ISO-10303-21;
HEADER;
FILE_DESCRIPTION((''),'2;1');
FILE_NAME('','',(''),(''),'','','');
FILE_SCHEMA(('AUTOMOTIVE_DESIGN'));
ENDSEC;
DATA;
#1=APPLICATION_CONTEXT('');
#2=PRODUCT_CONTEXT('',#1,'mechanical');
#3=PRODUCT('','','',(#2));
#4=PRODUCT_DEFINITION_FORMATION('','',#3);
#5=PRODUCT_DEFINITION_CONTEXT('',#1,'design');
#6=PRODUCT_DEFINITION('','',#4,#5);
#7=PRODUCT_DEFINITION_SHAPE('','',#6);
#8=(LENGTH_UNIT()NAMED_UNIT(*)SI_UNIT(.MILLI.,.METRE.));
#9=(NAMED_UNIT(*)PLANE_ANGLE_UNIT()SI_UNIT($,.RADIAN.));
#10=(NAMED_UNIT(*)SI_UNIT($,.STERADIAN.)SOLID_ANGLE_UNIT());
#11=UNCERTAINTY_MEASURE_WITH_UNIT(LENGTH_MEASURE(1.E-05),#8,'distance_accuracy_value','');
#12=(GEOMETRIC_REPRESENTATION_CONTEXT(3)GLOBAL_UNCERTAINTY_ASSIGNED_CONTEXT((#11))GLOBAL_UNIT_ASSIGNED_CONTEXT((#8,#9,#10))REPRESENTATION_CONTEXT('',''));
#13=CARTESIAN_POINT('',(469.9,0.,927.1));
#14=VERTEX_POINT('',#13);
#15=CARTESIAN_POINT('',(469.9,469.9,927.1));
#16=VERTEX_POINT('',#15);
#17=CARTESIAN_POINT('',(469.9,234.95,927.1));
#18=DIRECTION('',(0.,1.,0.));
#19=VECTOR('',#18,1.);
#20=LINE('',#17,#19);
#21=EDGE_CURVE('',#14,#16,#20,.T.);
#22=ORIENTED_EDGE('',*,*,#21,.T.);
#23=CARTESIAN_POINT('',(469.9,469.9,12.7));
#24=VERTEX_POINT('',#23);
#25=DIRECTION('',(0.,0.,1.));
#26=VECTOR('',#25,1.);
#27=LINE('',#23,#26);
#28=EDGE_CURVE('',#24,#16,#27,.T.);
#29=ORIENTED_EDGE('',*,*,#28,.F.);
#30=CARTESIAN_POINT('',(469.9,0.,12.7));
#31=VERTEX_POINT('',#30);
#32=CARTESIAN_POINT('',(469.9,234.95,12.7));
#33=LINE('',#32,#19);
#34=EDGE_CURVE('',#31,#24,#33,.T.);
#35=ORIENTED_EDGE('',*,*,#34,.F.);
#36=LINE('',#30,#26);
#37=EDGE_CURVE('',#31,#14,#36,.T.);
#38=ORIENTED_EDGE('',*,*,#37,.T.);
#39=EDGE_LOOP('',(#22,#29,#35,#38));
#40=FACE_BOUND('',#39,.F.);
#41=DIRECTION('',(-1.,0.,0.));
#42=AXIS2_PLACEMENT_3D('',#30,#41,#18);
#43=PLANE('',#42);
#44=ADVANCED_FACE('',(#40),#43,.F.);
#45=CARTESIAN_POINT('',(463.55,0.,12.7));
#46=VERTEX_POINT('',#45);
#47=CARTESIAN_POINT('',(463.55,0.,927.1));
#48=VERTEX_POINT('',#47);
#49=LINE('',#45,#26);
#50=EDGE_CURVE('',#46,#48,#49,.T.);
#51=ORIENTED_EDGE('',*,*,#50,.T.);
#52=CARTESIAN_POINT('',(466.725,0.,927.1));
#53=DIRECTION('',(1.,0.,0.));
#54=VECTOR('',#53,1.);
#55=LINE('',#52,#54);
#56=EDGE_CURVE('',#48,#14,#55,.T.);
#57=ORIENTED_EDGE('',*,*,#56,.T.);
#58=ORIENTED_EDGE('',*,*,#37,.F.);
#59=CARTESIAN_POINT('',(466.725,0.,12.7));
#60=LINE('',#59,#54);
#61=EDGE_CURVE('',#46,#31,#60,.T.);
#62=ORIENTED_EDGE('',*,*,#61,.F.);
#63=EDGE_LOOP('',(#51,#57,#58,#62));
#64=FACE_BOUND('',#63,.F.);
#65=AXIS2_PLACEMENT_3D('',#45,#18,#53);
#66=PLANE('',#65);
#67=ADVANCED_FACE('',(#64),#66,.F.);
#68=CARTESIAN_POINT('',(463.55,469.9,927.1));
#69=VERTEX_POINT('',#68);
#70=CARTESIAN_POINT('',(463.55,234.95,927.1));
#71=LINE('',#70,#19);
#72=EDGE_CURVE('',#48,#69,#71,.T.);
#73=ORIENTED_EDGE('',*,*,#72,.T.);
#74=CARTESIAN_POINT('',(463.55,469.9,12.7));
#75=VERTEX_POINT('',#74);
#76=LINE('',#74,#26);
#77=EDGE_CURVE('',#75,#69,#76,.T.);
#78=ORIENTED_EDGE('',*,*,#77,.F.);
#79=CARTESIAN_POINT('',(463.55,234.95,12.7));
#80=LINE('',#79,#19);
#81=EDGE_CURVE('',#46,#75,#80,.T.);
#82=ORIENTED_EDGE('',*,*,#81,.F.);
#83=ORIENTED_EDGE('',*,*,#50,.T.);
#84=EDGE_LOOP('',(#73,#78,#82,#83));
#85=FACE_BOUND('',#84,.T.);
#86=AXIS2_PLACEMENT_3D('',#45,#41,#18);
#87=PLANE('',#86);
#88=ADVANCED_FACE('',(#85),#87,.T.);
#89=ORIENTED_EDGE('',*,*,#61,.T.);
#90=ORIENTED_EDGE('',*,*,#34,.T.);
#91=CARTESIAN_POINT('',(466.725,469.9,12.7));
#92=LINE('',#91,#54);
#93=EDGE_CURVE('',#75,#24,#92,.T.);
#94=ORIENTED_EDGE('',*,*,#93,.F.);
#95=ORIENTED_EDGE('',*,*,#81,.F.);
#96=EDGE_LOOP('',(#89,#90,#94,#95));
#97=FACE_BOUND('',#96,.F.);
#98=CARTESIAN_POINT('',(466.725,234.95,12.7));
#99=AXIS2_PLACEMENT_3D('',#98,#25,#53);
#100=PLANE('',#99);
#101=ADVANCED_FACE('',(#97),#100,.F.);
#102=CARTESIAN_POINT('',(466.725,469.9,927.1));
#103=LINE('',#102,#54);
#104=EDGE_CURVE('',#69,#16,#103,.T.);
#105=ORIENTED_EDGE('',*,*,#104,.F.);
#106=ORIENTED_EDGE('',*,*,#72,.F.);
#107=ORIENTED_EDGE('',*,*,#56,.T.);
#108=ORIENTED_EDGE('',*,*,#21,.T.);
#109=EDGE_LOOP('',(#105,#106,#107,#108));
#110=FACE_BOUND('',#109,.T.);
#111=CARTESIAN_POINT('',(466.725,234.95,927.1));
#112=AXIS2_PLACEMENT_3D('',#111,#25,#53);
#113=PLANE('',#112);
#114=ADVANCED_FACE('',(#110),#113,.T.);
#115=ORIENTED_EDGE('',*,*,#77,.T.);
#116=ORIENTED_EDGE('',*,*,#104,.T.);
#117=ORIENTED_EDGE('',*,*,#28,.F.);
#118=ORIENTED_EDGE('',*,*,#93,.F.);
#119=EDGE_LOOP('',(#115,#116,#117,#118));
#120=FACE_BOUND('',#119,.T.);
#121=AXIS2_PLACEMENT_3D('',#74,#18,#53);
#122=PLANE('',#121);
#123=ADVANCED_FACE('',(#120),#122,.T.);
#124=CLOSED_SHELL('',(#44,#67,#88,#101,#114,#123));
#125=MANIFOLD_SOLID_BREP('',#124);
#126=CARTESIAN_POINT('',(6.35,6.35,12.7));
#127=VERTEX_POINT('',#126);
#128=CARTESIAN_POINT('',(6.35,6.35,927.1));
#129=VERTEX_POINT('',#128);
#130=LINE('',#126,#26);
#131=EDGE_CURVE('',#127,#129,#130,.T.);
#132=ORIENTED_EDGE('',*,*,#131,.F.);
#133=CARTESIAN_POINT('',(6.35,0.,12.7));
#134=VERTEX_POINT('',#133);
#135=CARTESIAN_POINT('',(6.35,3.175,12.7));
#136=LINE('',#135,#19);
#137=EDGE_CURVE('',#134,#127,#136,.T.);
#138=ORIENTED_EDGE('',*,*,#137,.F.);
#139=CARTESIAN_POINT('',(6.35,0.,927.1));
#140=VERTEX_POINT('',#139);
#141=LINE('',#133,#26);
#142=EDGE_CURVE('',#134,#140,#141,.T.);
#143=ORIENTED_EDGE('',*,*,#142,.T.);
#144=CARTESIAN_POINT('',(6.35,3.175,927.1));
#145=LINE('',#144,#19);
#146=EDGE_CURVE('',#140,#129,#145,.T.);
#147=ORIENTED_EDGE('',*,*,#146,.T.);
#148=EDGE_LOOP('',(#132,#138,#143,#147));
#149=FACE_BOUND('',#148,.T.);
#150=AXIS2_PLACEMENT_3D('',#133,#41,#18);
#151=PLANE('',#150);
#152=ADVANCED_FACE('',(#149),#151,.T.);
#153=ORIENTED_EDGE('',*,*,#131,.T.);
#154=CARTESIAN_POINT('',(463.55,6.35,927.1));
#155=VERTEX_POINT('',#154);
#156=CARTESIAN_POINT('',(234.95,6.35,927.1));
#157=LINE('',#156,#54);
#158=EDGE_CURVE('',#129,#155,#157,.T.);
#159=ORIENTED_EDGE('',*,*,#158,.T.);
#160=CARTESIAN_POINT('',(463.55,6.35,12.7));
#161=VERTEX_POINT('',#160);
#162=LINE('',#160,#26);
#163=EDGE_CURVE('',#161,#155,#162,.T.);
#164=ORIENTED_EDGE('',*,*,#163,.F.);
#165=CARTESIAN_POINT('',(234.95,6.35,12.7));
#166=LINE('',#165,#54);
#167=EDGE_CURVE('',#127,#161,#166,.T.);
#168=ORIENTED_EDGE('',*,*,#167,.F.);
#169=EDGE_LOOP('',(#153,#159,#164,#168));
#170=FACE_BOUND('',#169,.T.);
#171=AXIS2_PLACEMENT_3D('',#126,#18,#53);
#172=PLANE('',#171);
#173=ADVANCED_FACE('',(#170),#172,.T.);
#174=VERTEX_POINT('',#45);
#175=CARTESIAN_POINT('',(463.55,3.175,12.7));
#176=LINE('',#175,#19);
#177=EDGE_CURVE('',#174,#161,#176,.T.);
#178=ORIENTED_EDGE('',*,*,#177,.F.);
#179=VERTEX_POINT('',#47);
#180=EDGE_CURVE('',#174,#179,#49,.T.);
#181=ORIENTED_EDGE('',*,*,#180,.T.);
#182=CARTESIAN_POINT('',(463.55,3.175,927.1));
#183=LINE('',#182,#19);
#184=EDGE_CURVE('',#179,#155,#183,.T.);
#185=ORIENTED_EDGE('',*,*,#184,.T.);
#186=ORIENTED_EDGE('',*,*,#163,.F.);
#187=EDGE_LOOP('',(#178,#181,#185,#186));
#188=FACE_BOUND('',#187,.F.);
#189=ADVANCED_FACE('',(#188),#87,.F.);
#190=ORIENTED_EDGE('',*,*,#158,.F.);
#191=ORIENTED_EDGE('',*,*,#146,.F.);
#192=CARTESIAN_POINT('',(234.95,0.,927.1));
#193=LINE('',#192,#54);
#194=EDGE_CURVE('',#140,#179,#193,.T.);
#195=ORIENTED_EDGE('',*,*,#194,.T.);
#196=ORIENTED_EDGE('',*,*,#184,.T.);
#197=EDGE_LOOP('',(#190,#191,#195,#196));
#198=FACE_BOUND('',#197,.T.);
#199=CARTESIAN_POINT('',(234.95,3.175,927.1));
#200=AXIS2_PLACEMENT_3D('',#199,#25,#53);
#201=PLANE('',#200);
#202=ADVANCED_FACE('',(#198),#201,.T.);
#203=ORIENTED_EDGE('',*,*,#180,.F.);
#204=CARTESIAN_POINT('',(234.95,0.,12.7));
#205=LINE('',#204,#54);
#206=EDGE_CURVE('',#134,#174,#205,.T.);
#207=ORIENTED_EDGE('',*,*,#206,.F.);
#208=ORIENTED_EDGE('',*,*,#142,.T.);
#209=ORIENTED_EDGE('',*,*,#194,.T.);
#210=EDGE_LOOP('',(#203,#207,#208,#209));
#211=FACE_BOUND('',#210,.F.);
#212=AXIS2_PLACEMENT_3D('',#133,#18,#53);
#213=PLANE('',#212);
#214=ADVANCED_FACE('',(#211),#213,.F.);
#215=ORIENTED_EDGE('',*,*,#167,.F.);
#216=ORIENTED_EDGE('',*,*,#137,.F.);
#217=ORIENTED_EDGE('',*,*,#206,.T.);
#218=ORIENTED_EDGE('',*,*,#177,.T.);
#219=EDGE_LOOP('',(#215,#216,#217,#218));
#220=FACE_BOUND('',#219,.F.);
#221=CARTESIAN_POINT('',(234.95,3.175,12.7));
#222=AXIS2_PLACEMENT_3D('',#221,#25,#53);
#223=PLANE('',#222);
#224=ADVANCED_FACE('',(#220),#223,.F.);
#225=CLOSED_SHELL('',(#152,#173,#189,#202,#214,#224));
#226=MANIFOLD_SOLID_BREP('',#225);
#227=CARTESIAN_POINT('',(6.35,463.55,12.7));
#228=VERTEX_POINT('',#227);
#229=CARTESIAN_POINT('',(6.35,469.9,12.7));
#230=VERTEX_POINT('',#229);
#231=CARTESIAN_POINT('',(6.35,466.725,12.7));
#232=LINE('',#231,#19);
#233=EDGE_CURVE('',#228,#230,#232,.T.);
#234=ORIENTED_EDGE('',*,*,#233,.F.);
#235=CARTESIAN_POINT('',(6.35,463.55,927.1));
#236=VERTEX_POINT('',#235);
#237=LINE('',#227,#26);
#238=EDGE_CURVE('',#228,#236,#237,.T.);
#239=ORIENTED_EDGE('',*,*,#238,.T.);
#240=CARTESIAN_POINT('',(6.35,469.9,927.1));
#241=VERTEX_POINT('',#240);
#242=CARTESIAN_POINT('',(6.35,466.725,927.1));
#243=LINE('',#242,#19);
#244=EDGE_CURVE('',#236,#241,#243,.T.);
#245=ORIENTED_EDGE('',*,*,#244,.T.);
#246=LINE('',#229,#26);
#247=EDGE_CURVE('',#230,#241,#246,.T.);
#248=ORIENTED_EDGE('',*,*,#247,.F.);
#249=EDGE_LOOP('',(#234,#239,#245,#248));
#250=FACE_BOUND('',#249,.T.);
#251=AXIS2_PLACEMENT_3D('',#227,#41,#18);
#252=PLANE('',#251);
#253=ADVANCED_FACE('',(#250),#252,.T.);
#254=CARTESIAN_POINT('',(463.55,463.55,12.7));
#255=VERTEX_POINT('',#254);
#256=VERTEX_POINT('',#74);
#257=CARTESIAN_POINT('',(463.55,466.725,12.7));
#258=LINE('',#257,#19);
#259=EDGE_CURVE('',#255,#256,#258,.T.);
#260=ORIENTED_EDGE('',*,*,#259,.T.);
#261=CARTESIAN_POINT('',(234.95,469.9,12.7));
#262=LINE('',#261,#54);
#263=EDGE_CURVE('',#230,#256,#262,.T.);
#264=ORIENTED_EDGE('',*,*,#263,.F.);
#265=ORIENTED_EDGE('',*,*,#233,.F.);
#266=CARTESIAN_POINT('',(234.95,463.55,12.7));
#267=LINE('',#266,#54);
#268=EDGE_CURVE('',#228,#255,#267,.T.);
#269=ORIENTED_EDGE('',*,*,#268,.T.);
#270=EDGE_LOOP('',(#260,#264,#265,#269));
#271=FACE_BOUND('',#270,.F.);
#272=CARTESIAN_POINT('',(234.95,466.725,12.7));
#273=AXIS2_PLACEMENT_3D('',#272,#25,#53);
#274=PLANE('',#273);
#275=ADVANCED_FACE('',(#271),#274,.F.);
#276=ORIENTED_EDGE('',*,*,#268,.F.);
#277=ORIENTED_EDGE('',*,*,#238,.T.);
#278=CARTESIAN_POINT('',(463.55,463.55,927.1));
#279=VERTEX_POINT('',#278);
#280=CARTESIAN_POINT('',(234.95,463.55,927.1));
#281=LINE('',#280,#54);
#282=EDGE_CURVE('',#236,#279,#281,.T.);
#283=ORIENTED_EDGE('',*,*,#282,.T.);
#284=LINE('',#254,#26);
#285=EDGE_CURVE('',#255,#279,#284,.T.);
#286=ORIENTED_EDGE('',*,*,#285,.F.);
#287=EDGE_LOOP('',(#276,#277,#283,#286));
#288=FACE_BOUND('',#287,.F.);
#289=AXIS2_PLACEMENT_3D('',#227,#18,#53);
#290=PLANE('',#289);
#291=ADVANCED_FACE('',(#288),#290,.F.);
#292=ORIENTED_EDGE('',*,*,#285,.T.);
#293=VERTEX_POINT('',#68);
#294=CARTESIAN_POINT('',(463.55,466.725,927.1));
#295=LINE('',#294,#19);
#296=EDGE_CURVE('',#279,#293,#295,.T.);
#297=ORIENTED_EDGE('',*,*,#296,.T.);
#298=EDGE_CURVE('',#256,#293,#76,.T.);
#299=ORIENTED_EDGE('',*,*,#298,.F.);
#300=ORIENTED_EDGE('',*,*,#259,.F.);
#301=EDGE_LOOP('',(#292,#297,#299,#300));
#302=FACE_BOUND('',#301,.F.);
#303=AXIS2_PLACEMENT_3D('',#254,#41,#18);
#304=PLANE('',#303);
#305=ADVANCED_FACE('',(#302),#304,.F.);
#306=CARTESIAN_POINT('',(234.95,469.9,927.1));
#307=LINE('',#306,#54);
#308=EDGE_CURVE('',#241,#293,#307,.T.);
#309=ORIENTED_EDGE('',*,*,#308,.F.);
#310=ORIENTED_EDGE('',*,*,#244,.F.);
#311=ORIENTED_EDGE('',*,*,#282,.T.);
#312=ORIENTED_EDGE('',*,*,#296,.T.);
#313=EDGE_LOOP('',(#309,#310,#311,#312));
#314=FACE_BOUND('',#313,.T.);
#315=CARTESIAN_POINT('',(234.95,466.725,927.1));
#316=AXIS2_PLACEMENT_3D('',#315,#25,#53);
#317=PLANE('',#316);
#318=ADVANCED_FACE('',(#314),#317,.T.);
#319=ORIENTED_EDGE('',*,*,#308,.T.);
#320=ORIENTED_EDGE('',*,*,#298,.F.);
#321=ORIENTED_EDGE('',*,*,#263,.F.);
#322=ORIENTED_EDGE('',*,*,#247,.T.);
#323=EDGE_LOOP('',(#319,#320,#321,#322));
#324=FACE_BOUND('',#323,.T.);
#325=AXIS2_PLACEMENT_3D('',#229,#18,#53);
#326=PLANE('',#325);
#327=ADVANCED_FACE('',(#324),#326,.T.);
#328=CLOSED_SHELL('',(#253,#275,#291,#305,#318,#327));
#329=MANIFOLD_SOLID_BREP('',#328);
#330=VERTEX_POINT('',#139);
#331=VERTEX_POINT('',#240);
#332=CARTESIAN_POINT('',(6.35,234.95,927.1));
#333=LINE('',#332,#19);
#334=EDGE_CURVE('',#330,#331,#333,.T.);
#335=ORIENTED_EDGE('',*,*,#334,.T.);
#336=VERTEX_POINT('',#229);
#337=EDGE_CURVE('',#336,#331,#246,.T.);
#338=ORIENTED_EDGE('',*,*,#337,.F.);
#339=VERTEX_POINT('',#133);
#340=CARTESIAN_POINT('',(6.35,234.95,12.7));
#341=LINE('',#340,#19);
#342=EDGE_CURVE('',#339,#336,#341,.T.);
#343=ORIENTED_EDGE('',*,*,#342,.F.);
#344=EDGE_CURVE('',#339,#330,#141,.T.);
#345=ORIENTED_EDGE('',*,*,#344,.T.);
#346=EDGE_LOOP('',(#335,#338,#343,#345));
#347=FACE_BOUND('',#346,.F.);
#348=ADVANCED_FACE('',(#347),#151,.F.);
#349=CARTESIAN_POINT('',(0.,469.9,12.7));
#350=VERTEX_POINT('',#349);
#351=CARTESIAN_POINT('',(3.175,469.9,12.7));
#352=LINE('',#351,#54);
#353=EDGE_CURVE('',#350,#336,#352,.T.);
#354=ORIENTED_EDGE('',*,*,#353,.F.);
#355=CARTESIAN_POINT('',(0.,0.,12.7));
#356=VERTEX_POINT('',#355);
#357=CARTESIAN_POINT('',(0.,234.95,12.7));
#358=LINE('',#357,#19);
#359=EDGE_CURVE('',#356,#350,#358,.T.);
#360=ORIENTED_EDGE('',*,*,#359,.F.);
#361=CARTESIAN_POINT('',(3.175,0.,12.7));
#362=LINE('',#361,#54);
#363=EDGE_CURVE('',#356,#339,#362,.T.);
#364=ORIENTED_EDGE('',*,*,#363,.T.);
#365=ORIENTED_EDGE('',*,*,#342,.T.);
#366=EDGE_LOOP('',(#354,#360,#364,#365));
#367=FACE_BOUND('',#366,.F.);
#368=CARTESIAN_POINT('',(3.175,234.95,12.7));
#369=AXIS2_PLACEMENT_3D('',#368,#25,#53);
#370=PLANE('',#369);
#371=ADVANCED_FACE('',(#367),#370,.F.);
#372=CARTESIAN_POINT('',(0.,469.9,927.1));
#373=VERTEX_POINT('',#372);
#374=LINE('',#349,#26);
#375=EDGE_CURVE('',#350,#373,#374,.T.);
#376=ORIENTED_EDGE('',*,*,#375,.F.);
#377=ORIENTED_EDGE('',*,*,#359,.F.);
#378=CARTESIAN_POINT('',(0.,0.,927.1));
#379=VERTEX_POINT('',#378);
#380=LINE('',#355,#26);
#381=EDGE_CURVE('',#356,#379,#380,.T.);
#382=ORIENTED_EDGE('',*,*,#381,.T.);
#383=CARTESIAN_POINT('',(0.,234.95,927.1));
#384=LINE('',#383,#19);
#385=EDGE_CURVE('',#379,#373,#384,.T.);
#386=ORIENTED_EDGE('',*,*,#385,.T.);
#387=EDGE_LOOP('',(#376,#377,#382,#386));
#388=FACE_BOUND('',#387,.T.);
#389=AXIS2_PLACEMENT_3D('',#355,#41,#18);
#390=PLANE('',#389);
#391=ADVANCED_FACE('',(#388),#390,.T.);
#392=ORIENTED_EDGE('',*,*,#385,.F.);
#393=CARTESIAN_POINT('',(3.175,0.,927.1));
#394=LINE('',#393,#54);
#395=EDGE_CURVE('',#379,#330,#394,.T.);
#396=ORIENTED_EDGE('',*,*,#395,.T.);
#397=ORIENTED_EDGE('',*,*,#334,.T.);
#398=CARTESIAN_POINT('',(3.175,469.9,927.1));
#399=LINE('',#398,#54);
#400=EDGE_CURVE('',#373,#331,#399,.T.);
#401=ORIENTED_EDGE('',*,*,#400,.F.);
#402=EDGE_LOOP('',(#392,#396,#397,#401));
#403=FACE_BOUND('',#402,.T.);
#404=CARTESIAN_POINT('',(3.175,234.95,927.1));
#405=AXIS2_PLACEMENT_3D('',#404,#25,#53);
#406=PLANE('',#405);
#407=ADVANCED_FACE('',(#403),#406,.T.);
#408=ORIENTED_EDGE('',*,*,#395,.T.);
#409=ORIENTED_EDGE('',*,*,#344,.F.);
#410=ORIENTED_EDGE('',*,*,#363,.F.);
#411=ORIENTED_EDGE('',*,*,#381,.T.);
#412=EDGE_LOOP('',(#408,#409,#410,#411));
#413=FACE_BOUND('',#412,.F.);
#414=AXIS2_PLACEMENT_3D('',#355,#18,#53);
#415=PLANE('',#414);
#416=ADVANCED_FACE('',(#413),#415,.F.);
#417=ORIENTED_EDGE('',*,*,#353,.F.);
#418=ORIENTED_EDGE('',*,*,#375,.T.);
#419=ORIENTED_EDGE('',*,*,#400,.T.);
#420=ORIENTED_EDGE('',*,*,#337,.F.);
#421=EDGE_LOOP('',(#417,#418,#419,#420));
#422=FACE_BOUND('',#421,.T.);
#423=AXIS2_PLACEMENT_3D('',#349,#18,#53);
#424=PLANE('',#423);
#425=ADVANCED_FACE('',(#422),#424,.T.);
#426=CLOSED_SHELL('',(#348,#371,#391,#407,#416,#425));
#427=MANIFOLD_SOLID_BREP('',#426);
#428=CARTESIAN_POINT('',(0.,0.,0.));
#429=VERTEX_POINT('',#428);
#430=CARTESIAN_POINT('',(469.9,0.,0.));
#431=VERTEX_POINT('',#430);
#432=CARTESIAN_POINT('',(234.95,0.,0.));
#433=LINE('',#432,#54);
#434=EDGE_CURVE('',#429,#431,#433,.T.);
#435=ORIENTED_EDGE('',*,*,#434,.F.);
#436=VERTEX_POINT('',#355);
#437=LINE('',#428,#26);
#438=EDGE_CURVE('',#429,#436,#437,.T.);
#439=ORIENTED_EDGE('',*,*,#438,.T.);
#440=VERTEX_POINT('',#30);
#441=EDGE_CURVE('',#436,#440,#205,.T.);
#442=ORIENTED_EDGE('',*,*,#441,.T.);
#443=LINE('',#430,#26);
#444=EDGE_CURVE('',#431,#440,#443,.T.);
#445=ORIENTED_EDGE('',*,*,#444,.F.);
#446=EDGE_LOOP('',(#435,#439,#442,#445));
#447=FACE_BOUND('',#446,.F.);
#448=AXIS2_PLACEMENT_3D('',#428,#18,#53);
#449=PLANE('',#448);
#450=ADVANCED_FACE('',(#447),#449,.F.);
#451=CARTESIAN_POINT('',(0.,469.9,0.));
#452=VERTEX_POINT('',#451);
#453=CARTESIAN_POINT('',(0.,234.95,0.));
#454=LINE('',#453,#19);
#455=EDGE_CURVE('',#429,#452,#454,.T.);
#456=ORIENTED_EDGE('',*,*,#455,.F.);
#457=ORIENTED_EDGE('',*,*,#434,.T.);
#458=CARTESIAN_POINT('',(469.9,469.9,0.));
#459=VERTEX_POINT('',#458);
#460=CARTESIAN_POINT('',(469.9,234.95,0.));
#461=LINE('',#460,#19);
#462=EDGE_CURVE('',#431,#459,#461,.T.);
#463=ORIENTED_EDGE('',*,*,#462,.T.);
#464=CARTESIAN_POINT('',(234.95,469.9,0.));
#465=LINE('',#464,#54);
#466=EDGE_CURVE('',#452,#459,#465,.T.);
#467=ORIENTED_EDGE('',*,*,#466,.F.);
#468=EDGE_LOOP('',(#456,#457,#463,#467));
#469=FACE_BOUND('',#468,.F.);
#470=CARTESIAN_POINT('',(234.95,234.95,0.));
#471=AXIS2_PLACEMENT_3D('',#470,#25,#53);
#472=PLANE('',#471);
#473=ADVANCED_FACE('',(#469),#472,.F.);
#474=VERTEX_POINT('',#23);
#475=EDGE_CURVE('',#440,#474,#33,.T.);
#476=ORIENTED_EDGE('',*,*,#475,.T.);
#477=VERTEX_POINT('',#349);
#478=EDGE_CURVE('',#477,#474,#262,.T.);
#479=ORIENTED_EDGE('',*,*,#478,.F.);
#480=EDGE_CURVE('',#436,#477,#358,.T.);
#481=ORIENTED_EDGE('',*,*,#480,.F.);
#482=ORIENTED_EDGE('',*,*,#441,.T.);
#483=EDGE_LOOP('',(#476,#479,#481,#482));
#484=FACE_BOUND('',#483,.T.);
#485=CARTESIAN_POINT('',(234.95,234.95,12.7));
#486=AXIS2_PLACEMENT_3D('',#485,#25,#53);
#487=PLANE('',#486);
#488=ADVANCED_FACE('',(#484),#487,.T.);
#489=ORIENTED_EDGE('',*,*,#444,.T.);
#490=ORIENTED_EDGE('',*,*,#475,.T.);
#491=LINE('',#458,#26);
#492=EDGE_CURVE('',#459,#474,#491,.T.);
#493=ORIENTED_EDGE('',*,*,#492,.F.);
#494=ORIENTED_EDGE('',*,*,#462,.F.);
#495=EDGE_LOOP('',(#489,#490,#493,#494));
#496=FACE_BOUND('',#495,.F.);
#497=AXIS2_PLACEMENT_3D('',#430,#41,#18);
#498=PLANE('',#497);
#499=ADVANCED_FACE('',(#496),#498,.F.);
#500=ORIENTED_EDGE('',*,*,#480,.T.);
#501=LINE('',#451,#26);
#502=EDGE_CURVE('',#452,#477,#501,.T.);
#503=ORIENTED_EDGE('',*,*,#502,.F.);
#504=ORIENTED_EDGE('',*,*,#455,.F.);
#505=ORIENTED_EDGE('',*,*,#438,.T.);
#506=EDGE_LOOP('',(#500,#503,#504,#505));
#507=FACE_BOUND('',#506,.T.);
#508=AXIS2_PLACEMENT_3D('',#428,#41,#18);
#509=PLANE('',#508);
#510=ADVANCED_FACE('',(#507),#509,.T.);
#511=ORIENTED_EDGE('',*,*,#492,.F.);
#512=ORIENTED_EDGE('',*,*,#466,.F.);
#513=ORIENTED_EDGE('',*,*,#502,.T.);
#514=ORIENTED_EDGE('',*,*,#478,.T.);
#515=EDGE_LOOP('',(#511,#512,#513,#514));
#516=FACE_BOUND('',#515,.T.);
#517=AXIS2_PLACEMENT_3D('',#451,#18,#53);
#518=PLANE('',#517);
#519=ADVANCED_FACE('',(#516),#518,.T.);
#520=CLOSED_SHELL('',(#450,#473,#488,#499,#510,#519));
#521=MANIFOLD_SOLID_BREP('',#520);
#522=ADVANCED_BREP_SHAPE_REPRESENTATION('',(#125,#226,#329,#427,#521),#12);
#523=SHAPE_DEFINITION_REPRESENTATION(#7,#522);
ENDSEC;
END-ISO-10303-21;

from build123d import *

# Parameters (mm, degrees)
F0_W     = 469.9
F0_H     = 469.9
F1_DEPTH = 12.7
F5_W     = 457.2
F5_H     = 6.35
F6_DEPTH = 914.4
F2_W     = 6.35
F2_H     = 469.9
F3_W     = 6.35
F3_H     = 469.9
F4_W     = 457.2
F4_H     = 6.35


# Not quite as in the source:
# - a length typed as a fraction of an inch, garbled in the dataset ("3 / 203.2 mm" for 3/8 in), is restored


with BuildPart() as f1:
    # F0 (on Top) → F1 (new body)
    with BuildSketch(Plane.XY):
        with Locations((234.95, 234.95)):
            Rectangle(F0_W, F0_H)
    extrude(amount=F1_DEPTH)


with BuildPart() as f6:
    # F5 (on face) → F6 (new body)
    with BuildSketch(Plane.XY.offset(12.7)):
        with Locations((234.95, 3.175)):
            Rectangle(F5_W, F5_H)
    extrude(amount=F6_DEPTH)


with BuildPart() as f6b:
    # F2 (on face) → F6, piece 2 (new body)
    with BuildSketch(Plane.XY.offset(12.7)):
        with Locations((3.175, 234.95)):
            Rectangle(F2_W, F2_H)
    extrude(amount=F6_DEPTH)


with BuildPart() as f6c:
    # F3 (on face) → F6, piece 3 (new body)
    with BuildSketch(Plane.XY.offset(12.7)):
        with Locations((466.725, 234.95)):
            Rectangle(F3_W, F3_H)
    extrude(amount=F6_DEPTH)


with BuildPart() as f6d:
    # F4 (on face) → F6, piece 4 (new body)
    with BuildSketch(Plane.XY.offset(12.7)):
        with Locations((234.95, 466.725)):
            Rectangle(F4_W, F4_H)
    extrude(amount=F6_DEPTH)


solid = Compound([f1.part, f6.part, f6b.part, f6c.part, f6d.part])
